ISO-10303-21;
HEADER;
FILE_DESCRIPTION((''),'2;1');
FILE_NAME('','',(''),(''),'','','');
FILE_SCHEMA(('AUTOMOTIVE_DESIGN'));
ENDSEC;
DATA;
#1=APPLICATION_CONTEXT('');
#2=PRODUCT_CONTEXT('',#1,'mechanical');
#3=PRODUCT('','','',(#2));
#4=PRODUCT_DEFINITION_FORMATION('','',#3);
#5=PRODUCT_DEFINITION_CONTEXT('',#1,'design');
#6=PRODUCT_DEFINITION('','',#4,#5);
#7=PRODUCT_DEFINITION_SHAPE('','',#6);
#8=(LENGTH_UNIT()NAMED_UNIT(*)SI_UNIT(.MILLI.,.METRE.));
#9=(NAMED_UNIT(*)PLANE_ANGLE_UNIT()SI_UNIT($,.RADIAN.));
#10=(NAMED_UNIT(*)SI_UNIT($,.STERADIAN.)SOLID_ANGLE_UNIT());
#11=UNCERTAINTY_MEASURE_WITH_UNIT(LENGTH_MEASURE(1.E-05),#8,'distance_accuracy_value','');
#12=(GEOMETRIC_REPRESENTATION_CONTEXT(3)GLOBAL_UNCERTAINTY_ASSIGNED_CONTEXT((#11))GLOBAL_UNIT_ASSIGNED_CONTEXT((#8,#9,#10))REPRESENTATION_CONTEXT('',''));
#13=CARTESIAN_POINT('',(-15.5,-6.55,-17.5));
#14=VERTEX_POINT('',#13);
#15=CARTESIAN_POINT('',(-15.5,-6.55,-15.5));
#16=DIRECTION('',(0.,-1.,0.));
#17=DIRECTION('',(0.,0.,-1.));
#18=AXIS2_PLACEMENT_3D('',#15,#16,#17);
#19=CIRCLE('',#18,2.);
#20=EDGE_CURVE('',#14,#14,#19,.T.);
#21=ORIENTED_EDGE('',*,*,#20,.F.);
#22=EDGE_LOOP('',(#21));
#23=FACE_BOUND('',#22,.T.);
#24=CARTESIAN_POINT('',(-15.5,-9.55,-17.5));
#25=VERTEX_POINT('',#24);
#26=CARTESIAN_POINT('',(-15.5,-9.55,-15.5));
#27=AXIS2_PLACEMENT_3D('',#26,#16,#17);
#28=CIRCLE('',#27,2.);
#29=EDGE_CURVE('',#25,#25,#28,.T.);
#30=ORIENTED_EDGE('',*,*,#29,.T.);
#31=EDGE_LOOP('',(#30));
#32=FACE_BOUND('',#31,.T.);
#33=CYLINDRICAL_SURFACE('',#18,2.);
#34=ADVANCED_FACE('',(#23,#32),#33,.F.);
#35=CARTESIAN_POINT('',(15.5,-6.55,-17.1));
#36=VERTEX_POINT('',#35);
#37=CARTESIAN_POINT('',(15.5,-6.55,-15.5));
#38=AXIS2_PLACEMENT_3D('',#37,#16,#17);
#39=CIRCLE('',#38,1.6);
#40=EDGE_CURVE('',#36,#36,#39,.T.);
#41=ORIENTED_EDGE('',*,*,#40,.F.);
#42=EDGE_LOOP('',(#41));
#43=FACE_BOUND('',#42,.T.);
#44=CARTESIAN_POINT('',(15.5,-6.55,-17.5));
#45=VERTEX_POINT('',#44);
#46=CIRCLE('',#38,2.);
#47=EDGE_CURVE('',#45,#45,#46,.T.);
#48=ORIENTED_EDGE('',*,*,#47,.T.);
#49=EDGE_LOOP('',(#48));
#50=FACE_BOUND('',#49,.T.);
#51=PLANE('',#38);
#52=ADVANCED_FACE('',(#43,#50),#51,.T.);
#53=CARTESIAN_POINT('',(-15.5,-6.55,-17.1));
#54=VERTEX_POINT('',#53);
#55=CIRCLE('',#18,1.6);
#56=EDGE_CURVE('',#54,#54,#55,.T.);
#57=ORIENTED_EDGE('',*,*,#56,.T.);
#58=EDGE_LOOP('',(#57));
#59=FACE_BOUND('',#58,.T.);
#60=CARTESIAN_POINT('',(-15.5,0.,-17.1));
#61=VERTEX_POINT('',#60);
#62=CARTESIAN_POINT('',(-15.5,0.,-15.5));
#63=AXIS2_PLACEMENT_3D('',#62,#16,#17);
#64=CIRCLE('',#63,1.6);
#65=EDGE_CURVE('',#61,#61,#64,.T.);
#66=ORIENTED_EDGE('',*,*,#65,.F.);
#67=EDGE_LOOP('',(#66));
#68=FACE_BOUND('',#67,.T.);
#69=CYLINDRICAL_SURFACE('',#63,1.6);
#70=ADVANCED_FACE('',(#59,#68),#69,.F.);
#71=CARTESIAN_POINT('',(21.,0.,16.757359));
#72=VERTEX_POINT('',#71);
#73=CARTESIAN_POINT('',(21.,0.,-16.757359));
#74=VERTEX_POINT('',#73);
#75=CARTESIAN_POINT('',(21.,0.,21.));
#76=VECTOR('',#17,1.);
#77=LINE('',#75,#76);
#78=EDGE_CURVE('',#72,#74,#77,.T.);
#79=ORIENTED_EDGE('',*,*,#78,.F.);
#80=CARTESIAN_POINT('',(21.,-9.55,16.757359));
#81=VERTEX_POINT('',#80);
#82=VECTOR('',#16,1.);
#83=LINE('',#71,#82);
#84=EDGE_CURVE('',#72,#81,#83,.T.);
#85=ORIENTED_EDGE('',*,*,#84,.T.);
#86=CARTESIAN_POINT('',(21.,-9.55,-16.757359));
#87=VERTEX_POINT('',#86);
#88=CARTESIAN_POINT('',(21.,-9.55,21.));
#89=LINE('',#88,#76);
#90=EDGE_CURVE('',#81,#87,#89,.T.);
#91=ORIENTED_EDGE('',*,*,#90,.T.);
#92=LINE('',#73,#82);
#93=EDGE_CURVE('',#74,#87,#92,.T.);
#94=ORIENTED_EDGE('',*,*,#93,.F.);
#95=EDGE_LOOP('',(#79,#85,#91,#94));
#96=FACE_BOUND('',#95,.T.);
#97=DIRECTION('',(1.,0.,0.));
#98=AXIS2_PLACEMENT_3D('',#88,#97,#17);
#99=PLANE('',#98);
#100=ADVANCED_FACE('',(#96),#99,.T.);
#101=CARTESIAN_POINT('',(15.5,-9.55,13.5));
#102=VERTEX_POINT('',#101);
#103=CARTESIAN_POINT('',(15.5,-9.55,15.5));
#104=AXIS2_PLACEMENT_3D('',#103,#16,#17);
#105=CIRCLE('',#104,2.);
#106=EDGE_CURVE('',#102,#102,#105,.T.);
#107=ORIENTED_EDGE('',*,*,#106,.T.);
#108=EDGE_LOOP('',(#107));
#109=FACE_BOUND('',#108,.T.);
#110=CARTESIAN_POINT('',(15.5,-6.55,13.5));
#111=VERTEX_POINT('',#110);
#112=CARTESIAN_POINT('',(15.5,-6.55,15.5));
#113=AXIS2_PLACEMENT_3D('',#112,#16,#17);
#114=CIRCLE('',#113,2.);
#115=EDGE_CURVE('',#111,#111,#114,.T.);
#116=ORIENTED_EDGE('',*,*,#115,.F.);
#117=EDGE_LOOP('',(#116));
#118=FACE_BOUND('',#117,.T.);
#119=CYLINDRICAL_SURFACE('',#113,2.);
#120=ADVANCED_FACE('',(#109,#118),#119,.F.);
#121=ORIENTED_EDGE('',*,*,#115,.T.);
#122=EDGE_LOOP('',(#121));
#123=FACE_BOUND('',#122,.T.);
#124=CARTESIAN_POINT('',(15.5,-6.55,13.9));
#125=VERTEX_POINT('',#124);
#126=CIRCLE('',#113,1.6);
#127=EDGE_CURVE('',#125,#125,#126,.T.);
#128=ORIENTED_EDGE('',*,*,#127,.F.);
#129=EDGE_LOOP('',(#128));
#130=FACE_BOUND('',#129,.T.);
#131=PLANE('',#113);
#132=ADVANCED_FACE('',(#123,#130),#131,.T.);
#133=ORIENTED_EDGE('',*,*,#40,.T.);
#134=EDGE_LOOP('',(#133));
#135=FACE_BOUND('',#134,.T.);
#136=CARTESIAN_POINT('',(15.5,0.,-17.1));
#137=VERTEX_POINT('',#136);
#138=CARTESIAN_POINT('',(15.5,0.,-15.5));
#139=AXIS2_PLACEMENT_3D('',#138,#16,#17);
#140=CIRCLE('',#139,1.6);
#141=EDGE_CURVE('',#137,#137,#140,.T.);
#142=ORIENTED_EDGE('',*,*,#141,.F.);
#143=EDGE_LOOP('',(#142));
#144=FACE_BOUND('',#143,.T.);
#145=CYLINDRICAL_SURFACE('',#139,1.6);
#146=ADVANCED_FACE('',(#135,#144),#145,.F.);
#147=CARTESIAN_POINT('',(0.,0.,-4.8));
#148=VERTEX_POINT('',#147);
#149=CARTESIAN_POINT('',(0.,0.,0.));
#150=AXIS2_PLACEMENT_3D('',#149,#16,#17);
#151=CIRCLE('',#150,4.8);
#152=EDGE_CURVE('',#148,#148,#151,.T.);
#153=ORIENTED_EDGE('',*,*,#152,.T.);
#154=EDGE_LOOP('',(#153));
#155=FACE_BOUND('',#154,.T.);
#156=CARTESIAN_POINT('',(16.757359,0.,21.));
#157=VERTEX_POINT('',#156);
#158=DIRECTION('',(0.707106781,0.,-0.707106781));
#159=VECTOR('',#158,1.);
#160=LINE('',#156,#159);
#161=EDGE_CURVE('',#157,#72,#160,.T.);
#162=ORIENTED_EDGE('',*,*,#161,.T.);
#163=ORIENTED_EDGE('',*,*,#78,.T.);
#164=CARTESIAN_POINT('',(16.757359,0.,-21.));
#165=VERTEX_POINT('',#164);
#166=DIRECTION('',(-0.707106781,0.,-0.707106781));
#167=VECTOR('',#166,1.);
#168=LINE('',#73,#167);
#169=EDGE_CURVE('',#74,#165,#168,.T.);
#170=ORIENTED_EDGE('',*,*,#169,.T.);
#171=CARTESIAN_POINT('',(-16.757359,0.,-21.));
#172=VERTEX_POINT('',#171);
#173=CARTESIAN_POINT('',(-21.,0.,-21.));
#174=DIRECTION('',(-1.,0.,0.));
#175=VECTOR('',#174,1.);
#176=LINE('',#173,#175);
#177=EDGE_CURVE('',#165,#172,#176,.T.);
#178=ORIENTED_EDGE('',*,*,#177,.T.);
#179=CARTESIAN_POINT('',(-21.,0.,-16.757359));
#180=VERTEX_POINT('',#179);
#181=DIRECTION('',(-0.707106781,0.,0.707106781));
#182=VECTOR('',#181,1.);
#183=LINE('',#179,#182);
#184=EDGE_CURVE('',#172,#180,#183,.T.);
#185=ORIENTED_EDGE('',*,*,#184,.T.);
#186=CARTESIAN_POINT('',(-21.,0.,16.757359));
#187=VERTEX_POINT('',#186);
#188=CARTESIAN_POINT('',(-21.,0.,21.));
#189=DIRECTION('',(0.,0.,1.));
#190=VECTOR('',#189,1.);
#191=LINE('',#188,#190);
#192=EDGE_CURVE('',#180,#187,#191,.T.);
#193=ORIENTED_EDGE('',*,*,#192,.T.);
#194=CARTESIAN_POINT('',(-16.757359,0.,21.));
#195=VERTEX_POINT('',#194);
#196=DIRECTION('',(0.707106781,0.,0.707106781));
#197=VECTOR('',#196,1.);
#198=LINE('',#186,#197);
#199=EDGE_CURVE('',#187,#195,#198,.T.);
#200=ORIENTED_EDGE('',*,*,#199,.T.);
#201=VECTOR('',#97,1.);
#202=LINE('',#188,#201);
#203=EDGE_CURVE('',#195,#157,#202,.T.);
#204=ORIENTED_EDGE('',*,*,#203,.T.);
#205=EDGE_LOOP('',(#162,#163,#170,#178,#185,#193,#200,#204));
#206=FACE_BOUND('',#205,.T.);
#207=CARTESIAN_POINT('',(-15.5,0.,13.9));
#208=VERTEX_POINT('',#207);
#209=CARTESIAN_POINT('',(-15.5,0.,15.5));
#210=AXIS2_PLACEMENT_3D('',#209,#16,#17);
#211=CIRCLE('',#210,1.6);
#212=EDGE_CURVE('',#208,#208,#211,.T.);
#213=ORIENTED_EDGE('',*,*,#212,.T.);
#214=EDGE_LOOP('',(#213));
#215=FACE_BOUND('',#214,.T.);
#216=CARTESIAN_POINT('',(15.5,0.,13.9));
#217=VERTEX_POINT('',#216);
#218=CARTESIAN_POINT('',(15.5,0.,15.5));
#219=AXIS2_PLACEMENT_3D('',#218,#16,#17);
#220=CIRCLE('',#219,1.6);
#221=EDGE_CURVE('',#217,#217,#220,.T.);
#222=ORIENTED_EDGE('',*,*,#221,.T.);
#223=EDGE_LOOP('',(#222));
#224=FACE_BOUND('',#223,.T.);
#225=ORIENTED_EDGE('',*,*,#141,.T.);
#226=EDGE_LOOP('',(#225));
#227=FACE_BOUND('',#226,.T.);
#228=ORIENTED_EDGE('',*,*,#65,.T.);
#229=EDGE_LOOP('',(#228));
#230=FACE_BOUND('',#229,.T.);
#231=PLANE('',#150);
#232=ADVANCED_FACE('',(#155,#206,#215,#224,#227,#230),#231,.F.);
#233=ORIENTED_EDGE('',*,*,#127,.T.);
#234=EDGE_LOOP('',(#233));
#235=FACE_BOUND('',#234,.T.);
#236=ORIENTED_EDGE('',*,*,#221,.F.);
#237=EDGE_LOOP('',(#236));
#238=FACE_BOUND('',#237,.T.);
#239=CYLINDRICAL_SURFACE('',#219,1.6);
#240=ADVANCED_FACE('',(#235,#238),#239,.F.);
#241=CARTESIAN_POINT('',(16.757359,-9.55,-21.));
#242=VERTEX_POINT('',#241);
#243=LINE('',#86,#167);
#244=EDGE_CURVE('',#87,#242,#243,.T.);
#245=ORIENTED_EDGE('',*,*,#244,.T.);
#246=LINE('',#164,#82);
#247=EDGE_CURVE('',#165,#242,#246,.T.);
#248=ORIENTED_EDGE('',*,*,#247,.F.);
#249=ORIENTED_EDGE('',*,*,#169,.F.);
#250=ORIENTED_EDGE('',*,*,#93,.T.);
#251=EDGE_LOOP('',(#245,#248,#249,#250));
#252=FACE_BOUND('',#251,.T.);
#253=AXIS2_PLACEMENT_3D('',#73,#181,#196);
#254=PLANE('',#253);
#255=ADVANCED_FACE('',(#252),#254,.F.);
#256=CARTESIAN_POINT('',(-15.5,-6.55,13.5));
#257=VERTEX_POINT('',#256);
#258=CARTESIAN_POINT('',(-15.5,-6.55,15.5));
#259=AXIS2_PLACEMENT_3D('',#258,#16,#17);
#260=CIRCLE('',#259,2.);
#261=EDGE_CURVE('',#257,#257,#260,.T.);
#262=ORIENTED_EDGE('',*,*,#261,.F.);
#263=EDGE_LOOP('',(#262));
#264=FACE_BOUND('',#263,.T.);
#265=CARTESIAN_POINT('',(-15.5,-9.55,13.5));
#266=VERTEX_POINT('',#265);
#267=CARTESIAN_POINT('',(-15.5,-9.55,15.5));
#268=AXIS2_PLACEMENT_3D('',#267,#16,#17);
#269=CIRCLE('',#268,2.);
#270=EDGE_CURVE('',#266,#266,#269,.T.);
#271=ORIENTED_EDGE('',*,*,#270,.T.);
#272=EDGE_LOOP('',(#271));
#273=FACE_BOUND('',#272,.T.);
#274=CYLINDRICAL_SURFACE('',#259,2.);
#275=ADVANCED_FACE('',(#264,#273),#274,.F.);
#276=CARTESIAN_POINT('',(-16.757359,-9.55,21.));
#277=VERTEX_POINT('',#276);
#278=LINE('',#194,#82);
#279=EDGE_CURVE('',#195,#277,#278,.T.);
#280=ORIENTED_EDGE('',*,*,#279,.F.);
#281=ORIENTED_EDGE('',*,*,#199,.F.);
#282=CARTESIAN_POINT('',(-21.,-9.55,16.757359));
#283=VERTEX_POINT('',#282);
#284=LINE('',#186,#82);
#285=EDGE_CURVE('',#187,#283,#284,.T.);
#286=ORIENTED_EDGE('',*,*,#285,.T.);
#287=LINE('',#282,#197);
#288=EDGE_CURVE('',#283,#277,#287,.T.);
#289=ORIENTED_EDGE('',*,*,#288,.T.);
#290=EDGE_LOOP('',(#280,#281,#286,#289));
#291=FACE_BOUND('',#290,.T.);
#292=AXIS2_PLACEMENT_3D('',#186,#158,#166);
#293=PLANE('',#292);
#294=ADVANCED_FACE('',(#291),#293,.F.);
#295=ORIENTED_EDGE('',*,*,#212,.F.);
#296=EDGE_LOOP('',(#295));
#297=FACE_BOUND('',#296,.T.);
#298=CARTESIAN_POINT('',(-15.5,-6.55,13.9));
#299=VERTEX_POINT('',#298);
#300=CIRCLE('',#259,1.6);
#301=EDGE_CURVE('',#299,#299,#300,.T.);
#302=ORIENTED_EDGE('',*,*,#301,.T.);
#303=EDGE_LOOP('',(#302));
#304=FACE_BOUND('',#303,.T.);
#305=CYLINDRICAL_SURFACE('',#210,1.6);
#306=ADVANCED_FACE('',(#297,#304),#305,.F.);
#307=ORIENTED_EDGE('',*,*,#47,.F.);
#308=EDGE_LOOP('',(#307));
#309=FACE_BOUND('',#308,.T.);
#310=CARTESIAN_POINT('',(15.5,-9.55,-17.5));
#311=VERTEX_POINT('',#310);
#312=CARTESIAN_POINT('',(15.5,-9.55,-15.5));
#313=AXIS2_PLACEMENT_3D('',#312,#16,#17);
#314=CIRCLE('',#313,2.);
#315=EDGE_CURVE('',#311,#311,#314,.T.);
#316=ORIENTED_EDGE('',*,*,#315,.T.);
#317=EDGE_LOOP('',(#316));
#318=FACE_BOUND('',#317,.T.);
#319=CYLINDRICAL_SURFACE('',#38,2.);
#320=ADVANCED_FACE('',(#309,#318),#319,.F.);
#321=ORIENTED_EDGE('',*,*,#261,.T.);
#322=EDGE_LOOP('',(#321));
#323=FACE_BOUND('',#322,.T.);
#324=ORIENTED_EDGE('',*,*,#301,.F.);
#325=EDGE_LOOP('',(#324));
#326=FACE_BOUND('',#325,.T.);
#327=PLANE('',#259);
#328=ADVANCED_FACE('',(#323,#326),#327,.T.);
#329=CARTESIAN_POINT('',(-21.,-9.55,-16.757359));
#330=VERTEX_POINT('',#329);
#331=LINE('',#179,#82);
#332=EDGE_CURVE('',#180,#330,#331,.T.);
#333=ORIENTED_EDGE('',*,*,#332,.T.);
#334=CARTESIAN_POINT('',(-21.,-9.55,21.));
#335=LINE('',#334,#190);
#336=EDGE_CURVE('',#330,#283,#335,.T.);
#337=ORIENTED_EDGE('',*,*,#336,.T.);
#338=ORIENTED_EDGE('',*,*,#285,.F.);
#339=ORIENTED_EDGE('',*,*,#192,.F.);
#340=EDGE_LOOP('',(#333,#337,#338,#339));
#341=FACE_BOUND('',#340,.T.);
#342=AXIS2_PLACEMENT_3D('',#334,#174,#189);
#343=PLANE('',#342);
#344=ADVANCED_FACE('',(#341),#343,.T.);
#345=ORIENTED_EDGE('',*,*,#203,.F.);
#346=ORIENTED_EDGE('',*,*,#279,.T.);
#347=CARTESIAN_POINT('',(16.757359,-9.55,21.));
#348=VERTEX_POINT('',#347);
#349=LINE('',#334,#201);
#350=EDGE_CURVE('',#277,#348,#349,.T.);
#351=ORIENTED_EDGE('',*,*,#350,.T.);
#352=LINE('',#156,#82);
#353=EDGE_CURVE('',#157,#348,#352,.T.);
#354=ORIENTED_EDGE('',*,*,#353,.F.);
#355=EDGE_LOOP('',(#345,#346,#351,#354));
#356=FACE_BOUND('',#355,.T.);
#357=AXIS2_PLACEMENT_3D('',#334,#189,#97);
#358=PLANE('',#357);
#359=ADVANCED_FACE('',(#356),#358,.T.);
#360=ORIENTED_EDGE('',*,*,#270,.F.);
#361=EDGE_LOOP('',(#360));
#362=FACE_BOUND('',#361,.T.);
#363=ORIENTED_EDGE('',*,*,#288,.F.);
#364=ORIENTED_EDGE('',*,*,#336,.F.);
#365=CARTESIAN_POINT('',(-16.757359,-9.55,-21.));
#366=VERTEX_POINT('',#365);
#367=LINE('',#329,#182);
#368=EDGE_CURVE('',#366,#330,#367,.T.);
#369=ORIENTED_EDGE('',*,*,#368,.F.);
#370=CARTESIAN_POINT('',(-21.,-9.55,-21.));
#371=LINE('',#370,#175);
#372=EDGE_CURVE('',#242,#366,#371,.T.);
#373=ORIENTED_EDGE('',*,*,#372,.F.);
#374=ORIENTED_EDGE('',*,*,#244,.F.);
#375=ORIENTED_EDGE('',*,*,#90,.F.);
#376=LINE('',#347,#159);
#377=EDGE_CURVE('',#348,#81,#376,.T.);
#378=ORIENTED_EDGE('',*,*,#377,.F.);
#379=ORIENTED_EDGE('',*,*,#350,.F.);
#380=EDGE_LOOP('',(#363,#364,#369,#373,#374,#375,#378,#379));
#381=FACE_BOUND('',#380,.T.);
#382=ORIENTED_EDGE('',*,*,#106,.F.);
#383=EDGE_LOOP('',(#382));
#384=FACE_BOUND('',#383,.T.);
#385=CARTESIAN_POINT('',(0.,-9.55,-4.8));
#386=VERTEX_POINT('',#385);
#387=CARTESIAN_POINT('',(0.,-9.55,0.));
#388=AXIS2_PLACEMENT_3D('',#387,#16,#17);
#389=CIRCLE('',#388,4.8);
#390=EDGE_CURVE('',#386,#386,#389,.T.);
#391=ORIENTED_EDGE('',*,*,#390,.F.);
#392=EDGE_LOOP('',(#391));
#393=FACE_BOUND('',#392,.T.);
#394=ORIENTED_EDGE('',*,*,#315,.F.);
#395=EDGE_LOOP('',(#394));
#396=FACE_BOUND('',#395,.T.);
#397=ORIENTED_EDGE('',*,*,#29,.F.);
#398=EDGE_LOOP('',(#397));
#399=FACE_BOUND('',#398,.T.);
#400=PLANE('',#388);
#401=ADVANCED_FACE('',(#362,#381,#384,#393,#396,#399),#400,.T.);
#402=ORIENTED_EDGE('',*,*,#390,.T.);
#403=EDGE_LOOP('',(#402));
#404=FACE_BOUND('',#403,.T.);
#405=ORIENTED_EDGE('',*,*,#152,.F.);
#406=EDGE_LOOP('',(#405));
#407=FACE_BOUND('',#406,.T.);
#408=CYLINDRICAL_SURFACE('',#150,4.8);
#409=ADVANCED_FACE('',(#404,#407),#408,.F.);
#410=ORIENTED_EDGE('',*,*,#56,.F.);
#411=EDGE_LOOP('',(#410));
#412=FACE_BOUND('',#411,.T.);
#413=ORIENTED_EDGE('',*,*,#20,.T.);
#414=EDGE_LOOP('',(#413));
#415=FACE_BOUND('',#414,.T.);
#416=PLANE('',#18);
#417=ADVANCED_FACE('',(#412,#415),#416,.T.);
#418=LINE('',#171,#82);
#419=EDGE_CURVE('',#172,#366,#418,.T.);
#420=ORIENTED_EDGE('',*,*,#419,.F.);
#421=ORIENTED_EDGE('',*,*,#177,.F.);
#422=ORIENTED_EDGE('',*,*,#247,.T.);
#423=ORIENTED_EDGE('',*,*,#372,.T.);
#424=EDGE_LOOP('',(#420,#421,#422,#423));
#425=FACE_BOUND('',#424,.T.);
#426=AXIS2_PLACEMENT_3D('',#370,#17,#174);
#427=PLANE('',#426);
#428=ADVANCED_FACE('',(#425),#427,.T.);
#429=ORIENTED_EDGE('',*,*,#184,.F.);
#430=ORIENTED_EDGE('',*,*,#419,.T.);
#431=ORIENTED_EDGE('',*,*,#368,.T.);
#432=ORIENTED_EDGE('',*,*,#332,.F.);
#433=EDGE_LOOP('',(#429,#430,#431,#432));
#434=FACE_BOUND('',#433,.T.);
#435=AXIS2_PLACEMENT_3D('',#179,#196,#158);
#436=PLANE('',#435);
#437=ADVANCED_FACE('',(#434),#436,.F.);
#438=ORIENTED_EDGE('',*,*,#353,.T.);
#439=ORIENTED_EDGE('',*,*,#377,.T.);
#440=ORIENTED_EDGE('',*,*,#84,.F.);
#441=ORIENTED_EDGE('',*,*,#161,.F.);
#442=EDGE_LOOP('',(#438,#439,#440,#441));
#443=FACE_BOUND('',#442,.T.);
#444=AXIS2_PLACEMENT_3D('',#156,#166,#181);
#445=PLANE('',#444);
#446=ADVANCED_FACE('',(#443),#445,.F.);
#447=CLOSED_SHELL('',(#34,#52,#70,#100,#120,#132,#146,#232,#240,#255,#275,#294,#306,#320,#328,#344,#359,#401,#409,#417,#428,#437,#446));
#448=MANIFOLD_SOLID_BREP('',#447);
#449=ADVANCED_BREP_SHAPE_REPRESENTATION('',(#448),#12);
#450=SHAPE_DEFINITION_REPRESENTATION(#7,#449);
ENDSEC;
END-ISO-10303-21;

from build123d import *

# Parameters (mm, degrees)
ESBO_O1_W             = 42
ESBO_O1_H             = 42
FLANGE_BASE1_DEPTH    = 9.55
CORTE_EXTRUS_O2_DEPTH = 32.196193678
ESBO_O4_R             = 4.8
CORTE_EXTRUS_O4_DEPTH = 32.196193678
ESBO_O16_R            = 2
CORTE_EXTRUS_O6_DEPTH = 3
ESBO_O19_R            = 1.6
CORTE_EXTRUS_O7_DEPTH = 31.412209719


# Sheet-metal steps are written as plain solids
with BuildPart() as part:
    # Esboço1 → Flange-base1 (new body)
    with BuildSketch(Plane(origin=(0, 0, 0), x_dir=(1, 0, 0), z_dir=(0, 1, 0))):
        Rectangle(ESBO_O1_W, ESBO_O1_H)
    extrude(amount=-FLANGE_BASE1_DEPTH)

    # Esboço3 → Corte-extrusão2 (cut, through all)
    with BuildSketch(Plane.XZ.offset(9.55)):
        Polygon((-21, 16.757359313), (-16.757359313, 21), (-21, 21), align=None)
        Polygon((-21, -21), (-21, -16.757359313), (-16.757359313, -21), align=None)
        Polygon((21, -21), (21, -16.757359313), (16.757359313, -21), align=None)
        Polygon((21, 16.757359313), (21, 21), (16.757359313, 21), align=None)
    extrude(amount=-CORTE_EXTRUS_O2_DEPTH, mode=Mode.SUBTRACT)

    # Esboço4 → Corte-extrusão4 (cut, through all)
    with BuildSketch(Plane.XZ.offset(9.55)):
        with Locations(Location((0, 0, 0), (0, 0, 270))):
            Circle(ESBO_O4_R)
    extrude(amount=-CORTE_EXTRUS_O4_DEPTH, mode=Mode.SUBTRACT)

    # Esboço16 → Corte-extrusão6 (cut)
    with BuildSketch(Plane.XZ.offset(9.55)):
        with Locations(Location((-15.5, -15.5, 0), (0, 0, 270))):
            Circle(ESBO_O16_R)
        with Locations(Location((-15.5, 15.5, 0), (0, 0, 270))):
            Circle(ESBO_O16_R)
        with Locations(Location((15.5, 15.5, 0), (0, 0, 270))):
            Circle(ESBO_O16_R)
        with Locations(Location((15.5, -15.5, 0), (0, 0, 270))):
            Circle(ESBO_O16_R)
    extrude(amount=-CORTE_EXTRUS_O6_DEPTH, mode=Mode.SUBTRACT)

    # Esboço19 → Corte-extrusão7 (cut, through all)
    with BuildSketch(Plane.XZ.offset(6.55)):
        with Locations(Location((15.5, -15.5, 0), (0, 0, 270))):
            Circle(ESBO_O19_R)
        with Locations(Location((-15.5, -15.5, 0), (0, 0, 270))):
            Circle(ESBO_O19_R)
        with Locations(Location((15.5, 15.5, 0), (0, 0, 270))):
            Circle(ESBO_O19_R)
        with Locations(Location((-15.5, 15.5, 0), (0, 0, 270))):
            Circle(ESBO_O19_R)
    extrude(amount=-CORTE_EXTRUS_O7_DEPTH, mode=Mode.SUBTRACT)


solid = part.part
